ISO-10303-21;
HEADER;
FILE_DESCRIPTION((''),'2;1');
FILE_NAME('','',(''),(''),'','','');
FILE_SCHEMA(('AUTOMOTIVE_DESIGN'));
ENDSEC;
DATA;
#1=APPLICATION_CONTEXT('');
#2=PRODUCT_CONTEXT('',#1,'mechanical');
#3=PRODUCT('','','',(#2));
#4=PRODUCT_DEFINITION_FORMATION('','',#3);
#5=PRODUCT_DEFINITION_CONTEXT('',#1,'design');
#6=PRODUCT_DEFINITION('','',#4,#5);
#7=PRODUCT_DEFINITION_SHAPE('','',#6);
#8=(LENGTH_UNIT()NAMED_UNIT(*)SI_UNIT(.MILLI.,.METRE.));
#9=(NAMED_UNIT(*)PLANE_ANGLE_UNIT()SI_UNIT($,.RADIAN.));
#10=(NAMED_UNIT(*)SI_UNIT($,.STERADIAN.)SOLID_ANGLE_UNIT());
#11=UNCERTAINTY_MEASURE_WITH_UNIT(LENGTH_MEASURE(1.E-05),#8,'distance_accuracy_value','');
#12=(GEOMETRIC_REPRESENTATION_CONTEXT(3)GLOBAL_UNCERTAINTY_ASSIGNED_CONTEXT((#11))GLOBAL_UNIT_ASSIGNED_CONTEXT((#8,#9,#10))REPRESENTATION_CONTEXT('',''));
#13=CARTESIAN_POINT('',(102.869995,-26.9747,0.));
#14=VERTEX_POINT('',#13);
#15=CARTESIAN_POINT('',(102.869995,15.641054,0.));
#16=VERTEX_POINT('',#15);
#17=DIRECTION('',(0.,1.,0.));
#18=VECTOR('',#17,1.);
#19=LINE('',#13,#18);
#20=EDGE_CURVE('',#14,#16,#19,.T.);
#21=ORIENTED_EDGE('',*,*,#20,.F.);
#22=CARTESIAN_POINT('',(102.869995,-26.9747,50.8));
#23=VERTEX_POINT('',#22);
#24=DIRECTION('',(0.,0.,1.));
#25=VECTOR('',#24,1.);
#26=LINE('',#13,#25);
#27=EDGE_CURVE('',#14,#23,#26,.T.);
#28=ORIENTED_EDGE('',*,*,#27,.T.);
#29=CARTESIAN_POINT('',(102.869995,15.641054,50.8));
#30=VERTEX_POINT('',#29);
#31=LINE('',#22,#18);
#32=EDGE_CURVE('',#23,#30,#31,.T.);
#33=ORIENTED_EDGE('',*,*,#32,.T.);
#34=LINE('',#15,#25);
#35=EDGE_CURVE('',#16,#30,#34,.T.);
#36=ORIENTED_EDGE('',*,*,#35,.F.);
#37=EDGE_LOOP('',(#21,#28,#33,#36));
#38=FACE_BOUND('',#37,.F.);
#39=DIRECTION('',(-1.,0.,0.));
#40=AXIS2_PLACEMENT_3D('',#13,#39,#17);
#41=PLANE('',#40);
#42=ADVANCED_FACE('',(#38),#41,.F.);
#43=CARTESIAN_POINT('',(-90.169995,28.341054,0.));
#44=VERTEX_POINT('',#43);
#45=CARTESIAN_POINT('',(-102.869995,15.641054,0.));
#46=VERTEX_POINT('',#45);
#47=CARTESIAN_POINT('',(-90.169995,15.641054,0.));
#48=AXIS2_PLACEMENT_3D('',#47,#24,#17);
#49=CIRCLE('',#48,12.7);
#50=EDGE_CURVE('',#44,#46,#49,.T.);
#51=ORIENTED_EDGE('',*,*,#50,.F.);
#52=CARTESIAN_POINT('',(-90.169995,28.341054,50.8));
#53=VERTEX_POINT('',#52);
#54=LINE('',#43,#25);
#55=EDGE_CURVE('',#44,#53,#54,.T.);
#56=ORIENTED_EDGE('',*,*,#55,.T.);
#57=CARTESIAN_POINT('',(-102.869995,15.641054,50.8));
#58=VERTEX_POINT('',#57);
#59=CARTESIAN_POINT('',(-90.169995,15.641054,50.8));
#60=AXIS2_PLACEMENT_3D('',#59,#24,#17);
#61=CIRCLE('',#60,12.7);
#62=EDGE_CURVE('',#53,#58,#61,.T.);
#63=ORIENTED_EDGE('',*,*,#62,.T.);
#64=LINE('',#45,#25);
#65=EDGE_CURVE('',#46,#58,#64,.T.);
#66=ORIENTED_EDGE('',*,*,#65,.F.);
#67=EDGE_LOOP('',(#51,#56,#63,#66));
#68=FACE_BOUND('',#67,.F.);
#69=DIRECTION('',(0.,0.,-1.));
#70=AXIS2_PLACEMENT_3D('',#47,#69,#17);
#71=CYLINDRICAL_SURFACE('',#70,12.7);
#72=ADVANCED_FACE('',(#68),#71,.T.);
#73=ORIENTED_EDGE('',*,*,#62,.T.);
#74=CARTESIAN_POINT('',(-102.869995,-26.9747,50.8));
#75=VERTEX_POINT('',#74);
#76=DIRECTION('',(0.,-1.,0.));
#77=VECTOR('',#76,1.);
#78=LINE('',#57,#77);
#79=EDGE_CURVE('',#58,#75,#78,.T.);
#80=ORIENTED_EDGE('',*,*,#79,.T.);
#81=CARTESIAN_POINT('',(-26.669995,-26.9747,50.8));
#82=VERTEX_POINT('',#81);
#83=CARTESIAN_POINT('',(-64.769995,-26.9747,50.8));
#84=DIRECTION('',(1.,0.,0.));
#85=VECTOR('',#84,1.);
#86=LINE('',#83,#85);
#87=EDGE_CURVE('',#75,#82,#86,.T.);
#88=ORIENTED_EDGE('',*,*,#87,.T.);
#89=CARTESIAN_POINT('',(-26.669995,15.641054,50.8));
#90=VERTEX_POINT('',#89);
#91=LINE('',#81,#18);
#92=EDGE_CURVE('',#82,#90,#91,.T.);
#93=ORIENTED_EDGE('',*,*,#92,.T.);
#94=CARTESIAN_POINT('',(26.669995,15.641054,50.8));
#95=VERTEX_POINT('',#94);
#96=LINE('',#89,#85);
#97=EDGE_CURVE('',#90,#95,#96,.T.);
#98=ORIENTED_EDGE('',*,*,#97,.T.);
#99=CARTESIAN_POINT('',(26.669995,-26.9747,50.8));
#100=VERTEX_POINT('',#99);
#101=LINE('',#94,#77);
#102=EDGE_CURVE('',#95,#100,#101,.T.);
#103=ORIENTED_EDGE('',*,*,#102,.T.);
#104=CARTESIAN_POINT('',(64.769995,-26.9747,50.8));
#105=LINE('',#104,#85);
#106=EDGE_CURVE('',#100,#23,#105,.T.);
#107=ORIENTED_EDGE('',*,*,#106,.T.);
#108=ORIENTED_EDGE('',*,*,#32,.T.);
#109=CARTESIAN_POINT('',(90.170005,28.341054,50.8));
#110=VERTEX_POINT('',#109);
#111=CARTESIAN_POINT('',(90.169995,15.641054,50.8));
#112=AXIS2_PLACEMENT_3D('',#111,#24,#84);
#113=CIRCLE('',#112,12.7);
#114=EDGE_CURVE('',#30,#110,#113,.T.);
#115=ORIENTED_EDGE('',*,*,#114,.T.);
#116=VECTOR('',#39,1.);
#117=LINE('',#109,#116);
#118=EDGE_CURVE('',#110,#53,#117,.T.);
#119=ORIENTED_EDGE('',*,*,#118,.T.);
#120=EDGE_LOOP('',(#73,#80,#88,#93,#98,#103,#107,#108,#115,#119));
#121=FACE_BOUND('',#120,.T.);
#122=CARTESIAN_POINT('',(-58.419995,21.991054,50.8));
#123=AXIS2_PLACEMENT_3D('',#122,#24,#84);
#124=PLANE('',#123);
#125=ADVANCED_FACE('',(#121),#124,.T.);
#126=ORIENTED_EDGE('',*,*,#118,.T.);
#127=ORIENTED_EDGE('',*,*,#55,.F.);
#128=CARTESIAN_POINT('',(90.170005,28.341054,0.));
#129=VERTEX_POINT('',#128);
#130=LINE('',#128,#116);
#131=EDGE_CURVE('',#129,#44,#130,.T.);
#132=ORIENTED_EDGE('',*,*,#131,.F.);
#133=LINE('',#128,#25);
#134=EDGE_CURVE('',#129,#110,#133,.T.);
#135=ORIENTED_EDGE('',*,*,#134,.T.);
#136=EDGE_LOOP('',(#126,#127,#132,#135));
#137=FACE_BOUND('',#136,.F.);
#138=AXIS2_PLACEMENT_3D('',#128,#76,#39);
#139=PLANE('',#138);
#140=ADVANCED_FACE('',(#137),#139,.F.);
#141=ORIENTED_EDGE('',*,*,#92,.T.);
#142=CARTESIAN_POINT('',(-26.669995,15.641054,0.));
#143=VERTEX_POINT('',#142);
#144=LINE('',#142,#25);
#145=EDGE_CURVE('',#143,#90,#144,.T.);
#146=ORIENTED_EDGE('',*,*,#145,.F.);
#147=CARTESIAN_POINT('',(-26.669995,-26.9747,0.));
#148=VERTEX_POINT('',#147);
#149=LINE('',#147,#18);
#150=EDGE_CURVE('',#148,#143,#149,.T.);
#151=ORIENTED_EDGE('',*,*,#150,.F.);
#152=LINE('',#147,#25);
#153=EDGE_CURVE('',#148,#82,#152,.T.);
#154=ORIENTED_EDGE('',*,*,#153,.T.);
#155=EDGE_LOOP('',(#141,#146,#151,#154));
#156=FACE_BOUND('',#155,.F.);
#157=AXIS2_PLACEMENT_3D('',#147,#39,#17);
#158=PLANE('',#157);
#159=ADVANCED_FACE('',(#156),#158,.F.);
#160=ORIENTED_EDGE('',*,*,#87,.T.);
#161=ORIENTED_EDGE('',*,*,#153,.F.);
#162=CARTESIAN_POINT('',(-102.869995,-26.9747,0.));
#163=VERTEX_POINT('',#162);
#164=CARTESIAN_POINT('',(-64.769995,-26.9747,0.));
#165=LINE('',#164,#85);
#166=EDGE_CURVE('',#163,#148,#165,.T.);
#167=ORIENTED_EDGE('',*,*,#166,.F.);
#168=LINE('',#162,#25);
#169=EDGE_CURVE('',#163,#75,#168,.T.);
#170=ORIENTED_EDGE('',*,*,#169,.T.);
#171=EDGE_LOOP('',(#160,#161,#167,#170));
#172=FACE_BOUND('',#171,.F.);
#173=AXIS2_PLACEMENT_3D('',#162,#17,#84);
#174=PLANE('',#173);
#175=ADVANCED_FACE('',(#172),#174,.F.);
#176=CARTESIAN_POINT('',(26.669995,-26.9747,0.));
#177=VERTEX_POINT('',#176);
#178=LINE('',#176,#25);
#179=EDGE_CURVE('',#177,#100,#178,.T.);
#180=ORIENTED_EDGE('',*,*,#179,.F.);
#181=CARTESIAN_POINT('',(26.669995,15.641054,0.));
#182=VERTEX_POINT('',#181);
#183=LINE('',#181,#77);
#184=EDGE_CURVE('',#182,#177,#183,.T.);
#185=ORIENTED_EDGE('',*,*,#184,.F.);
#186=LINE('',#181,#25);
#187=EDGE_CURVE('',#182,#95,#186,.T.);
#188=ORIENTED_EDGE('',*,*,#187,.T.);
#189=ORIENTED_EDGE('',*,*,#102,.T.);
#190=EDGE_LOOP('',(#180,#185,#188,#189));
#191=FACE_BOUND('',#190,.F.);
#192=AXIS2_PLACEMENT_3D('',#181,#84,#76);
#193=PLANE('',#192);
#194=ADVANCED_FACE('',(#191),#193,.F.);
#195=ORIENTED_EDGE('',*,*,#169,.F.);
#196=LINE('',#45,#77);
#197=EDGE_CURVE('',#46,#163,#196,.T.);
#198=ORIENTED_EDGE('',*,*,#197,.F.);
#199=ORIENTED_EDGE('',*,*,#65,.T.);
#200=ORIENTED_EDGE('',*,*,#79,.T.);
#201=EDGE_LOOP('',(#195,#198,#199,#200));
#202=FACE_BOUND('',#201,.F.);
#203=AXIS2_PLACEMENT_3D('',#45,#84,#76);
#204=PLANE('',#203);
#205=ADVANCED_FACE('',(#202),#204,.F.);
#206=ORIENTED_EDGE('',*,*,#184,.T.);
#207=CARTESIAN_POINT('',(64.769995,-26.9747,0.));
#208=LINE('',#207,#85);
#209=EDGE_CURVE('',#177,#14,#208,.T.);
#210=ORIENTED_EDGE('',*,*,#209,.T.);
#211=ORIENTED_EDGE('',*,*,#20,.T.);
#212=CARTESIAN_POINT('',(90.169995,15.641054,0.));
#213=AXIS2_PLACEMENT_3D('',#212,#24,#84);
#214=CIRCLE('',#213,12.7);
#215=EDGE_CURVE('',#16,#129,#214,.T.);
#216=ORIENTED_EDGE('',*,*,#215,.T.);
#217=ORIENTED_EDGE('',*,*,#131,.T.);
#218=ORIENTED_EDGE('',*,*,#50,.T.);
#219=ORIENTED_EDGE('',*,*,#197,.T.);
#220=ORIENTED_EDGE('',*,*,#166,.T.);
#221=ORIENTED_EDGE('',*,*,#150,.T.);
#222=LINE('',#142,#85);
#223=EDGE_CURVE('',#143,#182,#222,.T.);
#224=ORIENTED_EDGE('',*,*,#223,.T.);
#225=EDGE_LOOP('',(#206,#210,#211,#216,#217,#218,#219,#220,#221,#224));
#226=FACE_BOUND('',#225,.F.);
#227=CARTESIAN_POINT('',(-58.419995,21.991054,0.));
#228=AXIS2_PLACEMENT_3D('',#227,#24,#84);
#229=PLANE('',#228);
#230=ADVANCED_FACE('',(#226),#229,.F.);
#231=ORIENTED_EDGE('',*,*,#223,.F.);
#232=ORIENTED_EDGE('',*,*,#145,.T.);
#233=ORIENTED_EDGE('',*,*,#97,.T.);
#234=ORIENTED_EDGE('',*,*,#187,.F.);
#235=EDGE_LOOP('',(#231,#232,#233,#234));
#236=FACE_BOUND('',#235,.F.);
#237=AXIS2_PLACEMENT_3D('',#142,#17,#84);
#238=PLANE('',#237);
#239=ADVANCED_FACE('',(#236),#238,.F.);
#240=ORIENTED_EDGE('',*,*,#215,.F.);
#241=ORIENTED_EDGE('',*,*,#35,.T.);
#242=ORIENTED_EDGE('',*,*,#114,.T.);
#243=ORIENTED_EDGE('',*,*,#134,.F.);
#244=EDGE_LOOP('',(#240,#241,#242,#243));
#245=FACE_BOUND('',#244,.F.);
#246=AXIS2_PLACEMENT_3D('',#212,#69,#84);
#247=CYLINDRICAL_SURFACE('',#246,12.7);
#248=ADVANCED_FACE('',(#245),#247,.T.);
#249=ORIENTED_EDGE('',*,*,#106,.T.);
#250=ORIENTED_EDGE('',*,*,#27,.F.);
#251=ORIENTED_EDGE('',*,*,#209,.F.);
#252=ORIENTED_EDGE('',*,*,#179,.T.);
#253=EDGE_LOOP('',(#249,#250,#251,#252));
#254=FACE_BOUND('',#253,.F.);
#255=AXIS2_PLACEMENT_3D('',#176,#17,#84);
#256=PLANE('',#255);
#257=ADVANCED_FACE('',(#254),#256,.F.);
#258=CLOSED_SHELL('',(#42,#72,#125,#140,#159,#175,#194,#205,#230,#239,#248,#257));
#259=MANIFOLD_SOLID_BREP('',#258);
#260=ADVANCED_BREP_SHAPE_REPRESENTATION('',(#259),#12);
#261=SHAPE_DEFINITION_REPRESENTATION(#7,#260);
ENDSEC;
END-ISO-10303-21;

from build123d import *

# Parameters (mm, degrees)
F0_W     = 63.5
F0_H     = 12.7
F0_W_2   = 76.2
F0_H_2   = 25.4
F0_W_3   = 53.3399905968
F0_W_4   = 63.5000094032
F1_DEPTH = 50.8


# Not quite as in the source:
# - ends of sketch curves that miss each other by under 0.0002 mm in the source are joined


with BuildPart() as f1:
    # F0 (on Top) → F1 (new body)
    with BuildSketch(Plane.XY):
        with Locations((-58.4199952984, 21.9910541385)):
            Rectangle(F0_W, F0_H)
        with BuildLine():
            Line((-102.8699952984, 15.6410541385), (-102.8699952984, -1.5747001893))
            Line((-102.8699952984, -1.5747001893), (-26.6699952984, -1.5747001893))
            Line((-26.6699952984, -1.5747001893), (-26.6699952984, 15.6410541385))
            Line((-26.6699952984, 15.6410541385), (-90.1699952984, 15.6410541385))
            Line((-90.1699952984, 15.6410541385), (-90.1699952984, 28.3410541385))
            ThreePointArc((-90.1699952984, 28.3410541385), (-99.1502514195, 24.6213102596), (-102.8699952984, 15.6410541385))
        make_face()
        with Locations((-64.7699952984, -14.2747001893)):
            Rectangle(F0_W_2, F0_H_2)
        with Locations((0, 21.9910541385)):
            Rectangle(F0_W_3, F0_H)
        with Locations((58.42, 21.9910541385)):
            Rectangle(F0_W_4, F0_H)
        with BuildLine():
            Line((90.1700047016, 15.6410541385), (26.6699952984, 15.6410541385))
            Line((26.6699952984, 15.6410541385), (26.6699952984, -1.5747001893))
            Line((26.6699952984, -1.5747001893), (102.8699952984, -1.5747001893))
            Line((102.8699952984, -1.5747001893), (102.8699952984, 15.6410541385))
            ThreePointArc((102.8699952984, 15.6410541385), (99.1502514195, 24.6213102596), (90.1699952984, 28.3410541385))
            Line((90.1699952984, 28.3410541385), (90.1700047016, 15.6410541385))
        make_face()
        with Locations((64.7699952984, -14.2747001893)):
            Rectangle(F0_W_2, F0_H_2)
    extrude(amount=F1_DEPTH)


solid = f1.part
